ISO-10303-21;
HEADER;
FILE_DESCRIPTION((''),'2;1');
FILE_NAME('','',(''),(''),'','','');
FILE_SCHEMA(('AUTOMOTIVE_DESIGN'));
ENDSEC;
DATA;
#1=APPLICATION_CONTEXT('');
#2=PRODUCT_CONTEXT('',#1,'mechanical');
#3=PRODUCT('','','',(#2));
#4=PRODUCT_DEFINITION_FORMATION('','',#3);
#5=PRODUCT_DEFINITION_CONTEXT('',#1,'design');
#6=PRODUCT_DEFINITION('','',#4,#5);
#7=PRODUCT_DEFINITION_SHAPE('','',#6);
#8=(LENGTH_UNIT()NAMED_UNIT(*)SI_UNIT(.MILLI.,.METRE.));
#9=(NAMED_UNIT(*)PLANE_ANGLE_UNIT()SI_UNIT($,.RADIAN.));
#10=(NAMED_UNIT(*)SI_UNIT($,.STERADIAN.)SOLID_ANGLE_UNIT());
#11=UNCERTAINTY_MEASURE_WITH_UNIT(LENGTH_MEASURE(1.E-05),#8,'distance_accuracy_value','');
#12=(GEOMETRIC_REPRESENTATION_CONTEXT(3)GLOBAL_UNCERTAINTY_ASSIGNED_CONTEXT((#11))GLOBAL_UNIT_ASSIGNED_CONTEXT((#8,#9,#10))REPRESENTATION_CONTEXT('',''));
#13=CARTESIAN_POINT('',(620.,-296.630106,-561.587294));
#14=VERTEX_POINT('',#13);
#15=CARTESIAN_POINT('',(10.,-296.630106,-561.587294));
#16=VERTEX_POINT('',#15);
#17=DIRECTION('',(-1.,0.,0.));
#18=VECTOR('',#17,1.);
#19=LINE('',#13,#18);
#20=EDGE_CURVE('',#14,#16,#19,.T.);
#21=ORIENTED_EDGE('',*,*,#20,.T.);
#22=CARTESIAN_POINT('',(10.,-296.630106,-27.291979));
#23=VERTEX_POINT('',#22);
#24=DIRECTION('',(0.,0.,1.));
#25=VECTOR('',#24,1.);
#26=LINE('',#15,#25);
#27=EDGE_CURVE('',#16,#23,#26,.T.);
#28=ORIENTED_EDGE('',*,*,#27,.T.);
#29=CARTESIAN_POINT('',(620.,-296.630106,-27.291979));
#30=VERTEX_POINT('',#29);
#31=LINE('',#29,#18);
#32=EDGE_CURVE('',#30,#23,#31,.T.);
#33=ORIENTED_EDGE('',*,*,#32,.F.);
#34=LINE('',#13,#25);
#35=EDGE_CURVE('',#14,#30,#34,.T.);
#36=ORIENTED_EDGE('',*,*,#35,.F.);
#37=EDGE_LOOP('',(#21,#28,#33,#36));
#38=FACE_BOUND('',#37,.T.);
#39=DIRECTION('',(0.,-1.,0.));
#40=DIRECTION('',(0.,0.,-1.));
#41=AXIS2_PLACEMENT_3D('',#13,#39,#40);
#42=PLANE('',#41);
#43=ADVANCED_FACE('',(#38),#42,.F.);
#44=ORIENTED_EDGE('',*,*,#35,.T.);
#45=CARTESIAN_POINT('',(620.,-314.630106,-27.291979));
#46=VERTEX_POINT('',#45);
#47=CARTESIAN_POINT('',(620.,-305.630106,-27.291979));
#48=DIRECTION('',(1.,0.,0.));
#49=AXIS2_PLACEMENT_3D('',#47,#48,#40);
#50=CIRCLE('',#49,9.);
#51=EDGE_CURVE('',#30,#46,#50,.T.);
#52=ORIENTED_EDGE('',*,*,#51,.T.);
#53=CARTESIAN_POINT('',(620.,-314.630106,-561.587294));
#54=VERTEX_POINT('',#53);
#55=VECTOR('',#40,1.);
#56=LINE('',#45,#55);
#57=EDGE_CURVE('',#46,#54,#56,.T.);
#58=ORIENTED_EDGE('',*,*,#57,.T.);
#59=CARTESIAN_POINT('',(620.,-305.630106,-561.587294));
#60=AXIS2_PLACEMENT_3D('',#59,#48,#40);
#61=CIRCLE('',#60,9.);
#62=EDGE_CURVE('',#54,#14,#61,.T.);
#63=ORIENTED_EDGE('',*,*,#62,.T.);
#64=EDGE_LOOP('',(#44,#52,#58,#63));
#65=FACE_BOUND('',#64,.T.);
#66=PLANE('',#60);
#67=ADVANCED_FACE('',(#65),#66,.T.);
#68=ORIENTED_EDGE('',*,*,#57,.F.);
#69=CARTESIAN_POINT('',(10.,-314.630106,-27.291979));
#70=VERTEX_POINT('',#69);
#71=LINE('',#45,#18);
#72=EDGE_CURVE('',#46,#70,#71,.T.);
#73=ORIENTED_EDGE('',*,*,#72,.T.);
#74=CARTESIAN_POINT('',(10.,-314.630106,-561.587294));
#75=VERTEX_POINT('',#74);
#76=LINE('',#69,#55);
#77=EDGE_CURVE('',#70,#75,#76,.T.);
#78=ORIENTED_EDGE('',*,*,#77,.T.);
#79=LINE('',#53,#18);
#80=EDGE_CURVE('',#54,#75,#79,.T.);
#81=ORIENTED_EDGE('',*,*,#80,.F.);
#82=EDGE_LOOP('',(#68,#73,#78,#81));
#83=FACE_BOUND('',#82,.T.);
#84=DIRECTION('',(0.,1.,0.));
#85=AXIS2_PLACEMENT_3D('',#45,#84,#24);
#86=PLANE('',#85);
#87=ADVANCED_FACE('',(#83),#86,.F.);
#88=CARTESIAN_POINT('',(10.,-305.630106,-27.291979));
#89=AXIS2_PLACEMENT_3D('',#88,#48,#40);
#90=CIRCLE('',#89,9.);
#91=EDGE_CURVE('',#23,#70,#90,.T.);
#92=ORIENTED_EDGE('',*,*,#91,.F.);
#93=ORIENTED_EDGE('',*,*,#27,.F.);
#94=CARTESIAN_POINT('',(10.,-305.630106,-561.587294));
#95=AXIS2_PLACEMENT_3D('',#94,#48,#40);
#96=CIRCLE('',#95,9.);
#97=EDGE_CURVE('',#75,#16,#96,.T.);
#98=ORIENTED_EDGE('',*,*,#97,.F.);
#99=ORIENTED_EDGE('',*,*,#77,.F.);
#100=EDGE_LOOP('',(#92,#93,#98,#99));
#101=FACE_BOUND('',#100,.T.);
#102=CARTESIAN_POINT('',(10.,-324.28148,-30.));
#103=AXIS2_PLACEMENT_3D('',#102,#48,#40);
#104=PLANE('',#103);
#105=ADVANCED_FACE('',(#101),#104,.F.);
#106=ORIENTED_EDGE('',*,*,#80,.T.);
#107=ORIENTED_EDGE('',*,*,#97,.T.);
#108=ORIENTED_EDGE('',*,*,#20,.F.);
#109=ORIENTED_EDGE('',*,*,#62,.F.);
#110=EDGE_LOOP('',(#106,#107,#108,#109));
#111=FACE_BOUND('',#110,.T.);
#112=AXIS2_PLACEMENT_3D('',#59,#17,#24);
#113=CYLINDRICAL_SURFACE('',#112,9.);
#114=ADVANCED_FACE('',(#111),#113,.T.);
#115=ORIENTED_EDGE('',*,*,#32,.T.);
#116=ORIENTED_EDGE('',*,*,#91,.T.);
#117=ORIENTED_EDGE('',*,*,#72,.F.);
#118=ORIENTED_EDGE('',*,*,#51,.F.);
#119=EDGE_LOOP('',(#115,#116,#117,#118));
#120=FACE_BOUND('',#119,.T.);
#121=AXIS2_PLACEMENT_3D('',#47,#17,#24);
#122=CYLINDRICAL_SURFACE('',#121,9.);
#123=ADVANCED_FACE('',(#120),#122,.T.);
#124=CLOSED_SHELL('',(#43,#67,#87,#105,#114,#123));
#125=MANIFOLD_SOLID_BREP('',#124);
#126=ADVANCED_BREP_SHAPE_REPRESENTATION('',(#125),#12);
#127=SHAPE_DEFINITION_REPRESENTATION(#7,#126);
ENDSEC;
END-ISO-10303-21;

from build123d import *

# Parameters (mm, degrees)
BOSS_EXTRUDE1_DEPTH = 10
CUT_EXTRUDE4_DEPTH  = 3
BOSS_EXTRUDE2_DEPTH = 610
SPLIT1_DEPTH        = 10


# Read off the part's stored shape, not the designer's step: Split1
with BuildPart() as part:
    # Sketch1 → Boss-Extrude1 (new body)
    with BuildSketch(Plane(origin=(0, 0, 0), x_dir=(0, 0, -1), z_dir=(1, 0, 0))):
        with BuildLine():
            Line((0, -14.281480067), (0, -294.281480067))
            ThreePointArc((0, -294.281480067), (8.786796564, -315.494683503), (30, -324.281480067))
            Line((30, -324.281480067), (573.815572472, -324.281480067))
            ThreePointArc((573.815572472, -324.281480067), (580.886640283, -321.352547879), (583.815572472, -314.281480067))
            Line((583.815572472, -314.281480067), (583.815572472, -219.493566063))
            ThreePointArc((583.815572472, -219.493566063), (582.007092914, -213.757801699), (577.235773905, -210.096639855))
            Line((577.235773905, -210.096639855), (13.420201433, -4.88455386))
            ThreePointArc((13.420201433, -4.88455386), (4.264235636, -6.089959625), (0, -14.281480067))
        make_face()
    extrude(amount=BOSS_EXTRUDE1_DEPTH)

    # Sketch3 → Cut-Extrude4 (cut)
    with BuildSketch(Plane.ZY):
        with BuildLine():
            ThreePointArc((-23.162175785, -218.017297737), (-17.576945532, -207.678107035), (-26.738120061, -200.318314743))
            add(Edge.make_bspline(
                [(-26.738120061, -200.318314743), (-45.914354434, -200.660753587), (-151.32107334, -255.510398156), (-414.880335601, -286.385074175), (-542.431128002, -257.731725159), (-546.154906269, -257.731029979)],
                knots=[0, 0, 0, 0, 0.560935224, 0.660935224, 1, 1, 1, 1], degree=3))
            ThreePointArc((-546.154906269, -257.731029979), (-563.288388976, -273.27487263), (-549.474047026, -291.831036849))
            add(Edge.make_bspline(
                [(-549.474047026, -291.831036849), (-474.750080899, -306.502271197), (-284.669923623, -324.572171749), (-143.080818041, -266.034178467), (-23.162175785, -218.017297737)],
                knots=[0, 0, 0, 0, 0.423888314, 1, 1, 1, 1], degree=3))
        make_face()
        with BuildLine():
            ThreePointArc((-26.950185671, -47.737214996), (-28.17113687, -40.715672082), (-35.124917897, -39.154353359))
            add(Edge.make_bspline(
                [(-35.124917897, -39.154353359), (-50.602952828, -45.122445935), (-99.042539, -170.661871263), (-331.224003862, -171.181746235), (-353.169530365, -171.181734297)],
                knots=[0, 0, 0, 0, 0.639195597, 1, 1, 1, 1], degree=3))
            ThreePointArc((-353.169530365, -171.181734297), (-370.309371751, -186.812434708), (-356.32010769, -205.316311305))
            add(Edge.make_bspline(
                [(-356.32010769, -205.316311305), (-352.838937223, -205.964445921), (-121.396454164, -217.989087479), (-35.312726243, -66.629555086), (-26.950185671, -47.737214996)],
                knots=[0, 0, 0, 0, 0.40968467, 1, 1, 1, 1], degree=3))
        make_face()
    extrude(amount=-CUT_EXTRUDE4_DEPTH, mode=Mode.SUBTRACT)

    # Sketch5 → Boss-Extrude2 (add)
    with BuildSketch(Plane(origin=(10, 0, 0), x_dir=(0, 0, -1), z_dir=(1, 0, 0))):
        with BuildLine():
            Line((561.587294138, -296.630106089), (27.291979273, -296.630106089))
            ThreePointArc((27.291979273, -296.630106089), (18.291979273, -305.630106089), (27.291979273, -314.630106089))
            Line((27.291979273, -314.630106089), (561.587294138, -314.630106089))
            ThreePointArc((561.587294138, -314.630106089), (570.587294138, -305.630106089), (561.587294138, -296.630106089))
        make_face()
    extrude(amount=BOSS_EXTRUDE2_DEPTH)

    # Split1 outline → Split1 (cut)
    # profile 1 of 3: a face of its own
    with BuildSketch(Plane.YZ):
        with BuildLine():
            ThreePointArc((-294.281480067, 0), (-315.494683503, -8.786796564), (-324.281480067, -30))
            Line((-324.281480067, -30), (-324.281480067, -573.815572472))
            ThreePointArc((-324.281480067, -573.815572472), (-321.352547879, -580.886640284), (-314.281480067, -583.815572472))
            Line((-314.281480067, -583.815572472), (-219.493566063, -583.815572472))
            ThreePointArc((-219.493566063, -583.815572472), (-213.7578017, -582.007092914), (-210.096639855, -577.235773905))
            Line((-210.096639855, -577.235773905), (-4.88455386, -13.420201433))
            ThreePointArc((-4.88455386, -13.420201433), (-6.089959625, -4.264235637), (-14.281480067, 0))
            Line((-14.281480067, 0), (-294.281480067, 0))
        make_face()
        with BuildLine():
            ThreePointArc((-257.731029979, -546.154906269), (-273.27487263, -563.288388976), (-291.831036849, -549.474047026))
            add(Edge.make_bspline(
                [(-291.831036849, -549.474047026), (-306.502271197, -474.750080899), (-324.572171749, -284.669923623), (-266.034178467, -143.080818041), (-218.017297737, -23.162175785)],
                knots=[0, 0, 0, 0, 0.423888314, 1, 1, 1, 1], degree=3))
            ThreePointArc((-218.017297737, -23.162175785), (-207.678107036, -17.576945532), (-200.318314743, -26.738120061))
            add(Edge.make_bspline(
                [(-200.318314743, -26.738120061), (-200.660753587, -45.914354434), (-255.510398156, -151.32107334), (-286.385074175, -414.880335601), (-257.731725159, -542.431128002), (-257.731029979, -546.154906269)],
                knots=[0, 0, 0, 0, 0.560935224, 0.660935224, 1, 1, 1, 1], degree=3))
        make_face(mode=Mode.SUBTRACT)
        with BuildLine():
            ThreePointArc((-171.181734297, -353.169530365), (-186.812434708, -370.309371751), (-205.316311305, -356.32010769))
            add(Edge.make_bspline(
                [(-205.316311305, -356.32010769), (-205.964445921, -352.838937223), (-217.989087479, -121.396454164), (-66.629555086, -35.312726243), (-47.737214996, -26.950185671)],
                knots=[0, 0, 0, 0, 0.40968467, 1, 1, 1, 1], degree=3))
            ThreePointArc((-47.737214996, -26.950185671), (-40.715672082, -28.17113687), (-39.154353359, -35.124917897))
            add(Edge.make_bspline(
                [(-39.154353359, -35.124917897), (-45.122445935, -50.602952828), (-170.661871263, -99.042539), (-171.181746235, -331.224003862), (-171.181734297, -353.169530365)],
                knots=[0, 0, 0, 0, 0.639195597, 1, 1, 1, 1], degree=3))
        make_face(mode=Mode.SUBTRACT)
    # profile 2 of 3: a face of its own
    with BuildSketch(Plane.YZ):
        with BuildLine():
            add(Edge.make_bspline(
                [(-205.316311305, -356.32010769), (-205.964445921, -352.838937223), (-217.989087479, -121.396454164), (-66.629555086, -35.312726243), (-47.737214996, -26.950185671)],
                knots=[0, 0, 0, 0, 0.40968467, 1, 1, 1, 1], degree=3))
            ThreePointArc((-205.316311305, -356.32010769), (-186.812434708, -370.309371751), (-171.181734297, -353.169530365))
            add(Edge.make_bspline(
                [(-39.154353359, -35.124917897), (-45.122445935, -50.602952828), (-170.661871263, -99.042539), (-171.181746235, -331.224003862), (-171.181734297, -353.169530365)],
                knots=[0, 0, 0, 0, 0.639195597, 1, 1, 1, 1], degree=3))
            ThreePointArc((-39.154353359, -35.124917897), (-40.715672082, -28.17113687), (-47.737214996, -26.950185671))
        make_face()
    # profile 3 of 3: a face of its own
    with BuildSketch(Plane.YZ):
        with BuildLine():
            add(Edge.make_bspline(
                [(-291.831036849, -549.474047026), (-306.502271197, -474.750080899), (-324.572171749, -284.669923623), (-266.034178467, -143.080818041), (-218.017297737, -23.162175785)],
                knots=[0, 0, 0, 0, 0.423888314, 1, 1, 1, 1], degree=3))
            ThreePointArc((-291.831036849, -549.474047026), (-273.27487263, -563.288388976), (-257.731029979, -546.154906269))
            add(Edge.make_bspline(
                [(-200.318314743, -26.738120061), (-200.660753587, -45.914354434), (-255.510398156, -151.32107334), (-286.385074175, -414.880335601), (-257.731725159, -542.431128002), (-257.731029979, -546.154906269)],
                knots=[0, 0, 0, 0, 0.560935224, 0.660935224, 1, 1, 1, 1], degree=3))
            ThreePointArc((-200.318314743, -26.738120061), (-207.678107036, -17.576945532), (-218.017297737, -23.162175785))
        make_face()
    extrude(amount=SPLIT1_DEPTH, mode=Mode.SUBTRACT)


solid = part.part
